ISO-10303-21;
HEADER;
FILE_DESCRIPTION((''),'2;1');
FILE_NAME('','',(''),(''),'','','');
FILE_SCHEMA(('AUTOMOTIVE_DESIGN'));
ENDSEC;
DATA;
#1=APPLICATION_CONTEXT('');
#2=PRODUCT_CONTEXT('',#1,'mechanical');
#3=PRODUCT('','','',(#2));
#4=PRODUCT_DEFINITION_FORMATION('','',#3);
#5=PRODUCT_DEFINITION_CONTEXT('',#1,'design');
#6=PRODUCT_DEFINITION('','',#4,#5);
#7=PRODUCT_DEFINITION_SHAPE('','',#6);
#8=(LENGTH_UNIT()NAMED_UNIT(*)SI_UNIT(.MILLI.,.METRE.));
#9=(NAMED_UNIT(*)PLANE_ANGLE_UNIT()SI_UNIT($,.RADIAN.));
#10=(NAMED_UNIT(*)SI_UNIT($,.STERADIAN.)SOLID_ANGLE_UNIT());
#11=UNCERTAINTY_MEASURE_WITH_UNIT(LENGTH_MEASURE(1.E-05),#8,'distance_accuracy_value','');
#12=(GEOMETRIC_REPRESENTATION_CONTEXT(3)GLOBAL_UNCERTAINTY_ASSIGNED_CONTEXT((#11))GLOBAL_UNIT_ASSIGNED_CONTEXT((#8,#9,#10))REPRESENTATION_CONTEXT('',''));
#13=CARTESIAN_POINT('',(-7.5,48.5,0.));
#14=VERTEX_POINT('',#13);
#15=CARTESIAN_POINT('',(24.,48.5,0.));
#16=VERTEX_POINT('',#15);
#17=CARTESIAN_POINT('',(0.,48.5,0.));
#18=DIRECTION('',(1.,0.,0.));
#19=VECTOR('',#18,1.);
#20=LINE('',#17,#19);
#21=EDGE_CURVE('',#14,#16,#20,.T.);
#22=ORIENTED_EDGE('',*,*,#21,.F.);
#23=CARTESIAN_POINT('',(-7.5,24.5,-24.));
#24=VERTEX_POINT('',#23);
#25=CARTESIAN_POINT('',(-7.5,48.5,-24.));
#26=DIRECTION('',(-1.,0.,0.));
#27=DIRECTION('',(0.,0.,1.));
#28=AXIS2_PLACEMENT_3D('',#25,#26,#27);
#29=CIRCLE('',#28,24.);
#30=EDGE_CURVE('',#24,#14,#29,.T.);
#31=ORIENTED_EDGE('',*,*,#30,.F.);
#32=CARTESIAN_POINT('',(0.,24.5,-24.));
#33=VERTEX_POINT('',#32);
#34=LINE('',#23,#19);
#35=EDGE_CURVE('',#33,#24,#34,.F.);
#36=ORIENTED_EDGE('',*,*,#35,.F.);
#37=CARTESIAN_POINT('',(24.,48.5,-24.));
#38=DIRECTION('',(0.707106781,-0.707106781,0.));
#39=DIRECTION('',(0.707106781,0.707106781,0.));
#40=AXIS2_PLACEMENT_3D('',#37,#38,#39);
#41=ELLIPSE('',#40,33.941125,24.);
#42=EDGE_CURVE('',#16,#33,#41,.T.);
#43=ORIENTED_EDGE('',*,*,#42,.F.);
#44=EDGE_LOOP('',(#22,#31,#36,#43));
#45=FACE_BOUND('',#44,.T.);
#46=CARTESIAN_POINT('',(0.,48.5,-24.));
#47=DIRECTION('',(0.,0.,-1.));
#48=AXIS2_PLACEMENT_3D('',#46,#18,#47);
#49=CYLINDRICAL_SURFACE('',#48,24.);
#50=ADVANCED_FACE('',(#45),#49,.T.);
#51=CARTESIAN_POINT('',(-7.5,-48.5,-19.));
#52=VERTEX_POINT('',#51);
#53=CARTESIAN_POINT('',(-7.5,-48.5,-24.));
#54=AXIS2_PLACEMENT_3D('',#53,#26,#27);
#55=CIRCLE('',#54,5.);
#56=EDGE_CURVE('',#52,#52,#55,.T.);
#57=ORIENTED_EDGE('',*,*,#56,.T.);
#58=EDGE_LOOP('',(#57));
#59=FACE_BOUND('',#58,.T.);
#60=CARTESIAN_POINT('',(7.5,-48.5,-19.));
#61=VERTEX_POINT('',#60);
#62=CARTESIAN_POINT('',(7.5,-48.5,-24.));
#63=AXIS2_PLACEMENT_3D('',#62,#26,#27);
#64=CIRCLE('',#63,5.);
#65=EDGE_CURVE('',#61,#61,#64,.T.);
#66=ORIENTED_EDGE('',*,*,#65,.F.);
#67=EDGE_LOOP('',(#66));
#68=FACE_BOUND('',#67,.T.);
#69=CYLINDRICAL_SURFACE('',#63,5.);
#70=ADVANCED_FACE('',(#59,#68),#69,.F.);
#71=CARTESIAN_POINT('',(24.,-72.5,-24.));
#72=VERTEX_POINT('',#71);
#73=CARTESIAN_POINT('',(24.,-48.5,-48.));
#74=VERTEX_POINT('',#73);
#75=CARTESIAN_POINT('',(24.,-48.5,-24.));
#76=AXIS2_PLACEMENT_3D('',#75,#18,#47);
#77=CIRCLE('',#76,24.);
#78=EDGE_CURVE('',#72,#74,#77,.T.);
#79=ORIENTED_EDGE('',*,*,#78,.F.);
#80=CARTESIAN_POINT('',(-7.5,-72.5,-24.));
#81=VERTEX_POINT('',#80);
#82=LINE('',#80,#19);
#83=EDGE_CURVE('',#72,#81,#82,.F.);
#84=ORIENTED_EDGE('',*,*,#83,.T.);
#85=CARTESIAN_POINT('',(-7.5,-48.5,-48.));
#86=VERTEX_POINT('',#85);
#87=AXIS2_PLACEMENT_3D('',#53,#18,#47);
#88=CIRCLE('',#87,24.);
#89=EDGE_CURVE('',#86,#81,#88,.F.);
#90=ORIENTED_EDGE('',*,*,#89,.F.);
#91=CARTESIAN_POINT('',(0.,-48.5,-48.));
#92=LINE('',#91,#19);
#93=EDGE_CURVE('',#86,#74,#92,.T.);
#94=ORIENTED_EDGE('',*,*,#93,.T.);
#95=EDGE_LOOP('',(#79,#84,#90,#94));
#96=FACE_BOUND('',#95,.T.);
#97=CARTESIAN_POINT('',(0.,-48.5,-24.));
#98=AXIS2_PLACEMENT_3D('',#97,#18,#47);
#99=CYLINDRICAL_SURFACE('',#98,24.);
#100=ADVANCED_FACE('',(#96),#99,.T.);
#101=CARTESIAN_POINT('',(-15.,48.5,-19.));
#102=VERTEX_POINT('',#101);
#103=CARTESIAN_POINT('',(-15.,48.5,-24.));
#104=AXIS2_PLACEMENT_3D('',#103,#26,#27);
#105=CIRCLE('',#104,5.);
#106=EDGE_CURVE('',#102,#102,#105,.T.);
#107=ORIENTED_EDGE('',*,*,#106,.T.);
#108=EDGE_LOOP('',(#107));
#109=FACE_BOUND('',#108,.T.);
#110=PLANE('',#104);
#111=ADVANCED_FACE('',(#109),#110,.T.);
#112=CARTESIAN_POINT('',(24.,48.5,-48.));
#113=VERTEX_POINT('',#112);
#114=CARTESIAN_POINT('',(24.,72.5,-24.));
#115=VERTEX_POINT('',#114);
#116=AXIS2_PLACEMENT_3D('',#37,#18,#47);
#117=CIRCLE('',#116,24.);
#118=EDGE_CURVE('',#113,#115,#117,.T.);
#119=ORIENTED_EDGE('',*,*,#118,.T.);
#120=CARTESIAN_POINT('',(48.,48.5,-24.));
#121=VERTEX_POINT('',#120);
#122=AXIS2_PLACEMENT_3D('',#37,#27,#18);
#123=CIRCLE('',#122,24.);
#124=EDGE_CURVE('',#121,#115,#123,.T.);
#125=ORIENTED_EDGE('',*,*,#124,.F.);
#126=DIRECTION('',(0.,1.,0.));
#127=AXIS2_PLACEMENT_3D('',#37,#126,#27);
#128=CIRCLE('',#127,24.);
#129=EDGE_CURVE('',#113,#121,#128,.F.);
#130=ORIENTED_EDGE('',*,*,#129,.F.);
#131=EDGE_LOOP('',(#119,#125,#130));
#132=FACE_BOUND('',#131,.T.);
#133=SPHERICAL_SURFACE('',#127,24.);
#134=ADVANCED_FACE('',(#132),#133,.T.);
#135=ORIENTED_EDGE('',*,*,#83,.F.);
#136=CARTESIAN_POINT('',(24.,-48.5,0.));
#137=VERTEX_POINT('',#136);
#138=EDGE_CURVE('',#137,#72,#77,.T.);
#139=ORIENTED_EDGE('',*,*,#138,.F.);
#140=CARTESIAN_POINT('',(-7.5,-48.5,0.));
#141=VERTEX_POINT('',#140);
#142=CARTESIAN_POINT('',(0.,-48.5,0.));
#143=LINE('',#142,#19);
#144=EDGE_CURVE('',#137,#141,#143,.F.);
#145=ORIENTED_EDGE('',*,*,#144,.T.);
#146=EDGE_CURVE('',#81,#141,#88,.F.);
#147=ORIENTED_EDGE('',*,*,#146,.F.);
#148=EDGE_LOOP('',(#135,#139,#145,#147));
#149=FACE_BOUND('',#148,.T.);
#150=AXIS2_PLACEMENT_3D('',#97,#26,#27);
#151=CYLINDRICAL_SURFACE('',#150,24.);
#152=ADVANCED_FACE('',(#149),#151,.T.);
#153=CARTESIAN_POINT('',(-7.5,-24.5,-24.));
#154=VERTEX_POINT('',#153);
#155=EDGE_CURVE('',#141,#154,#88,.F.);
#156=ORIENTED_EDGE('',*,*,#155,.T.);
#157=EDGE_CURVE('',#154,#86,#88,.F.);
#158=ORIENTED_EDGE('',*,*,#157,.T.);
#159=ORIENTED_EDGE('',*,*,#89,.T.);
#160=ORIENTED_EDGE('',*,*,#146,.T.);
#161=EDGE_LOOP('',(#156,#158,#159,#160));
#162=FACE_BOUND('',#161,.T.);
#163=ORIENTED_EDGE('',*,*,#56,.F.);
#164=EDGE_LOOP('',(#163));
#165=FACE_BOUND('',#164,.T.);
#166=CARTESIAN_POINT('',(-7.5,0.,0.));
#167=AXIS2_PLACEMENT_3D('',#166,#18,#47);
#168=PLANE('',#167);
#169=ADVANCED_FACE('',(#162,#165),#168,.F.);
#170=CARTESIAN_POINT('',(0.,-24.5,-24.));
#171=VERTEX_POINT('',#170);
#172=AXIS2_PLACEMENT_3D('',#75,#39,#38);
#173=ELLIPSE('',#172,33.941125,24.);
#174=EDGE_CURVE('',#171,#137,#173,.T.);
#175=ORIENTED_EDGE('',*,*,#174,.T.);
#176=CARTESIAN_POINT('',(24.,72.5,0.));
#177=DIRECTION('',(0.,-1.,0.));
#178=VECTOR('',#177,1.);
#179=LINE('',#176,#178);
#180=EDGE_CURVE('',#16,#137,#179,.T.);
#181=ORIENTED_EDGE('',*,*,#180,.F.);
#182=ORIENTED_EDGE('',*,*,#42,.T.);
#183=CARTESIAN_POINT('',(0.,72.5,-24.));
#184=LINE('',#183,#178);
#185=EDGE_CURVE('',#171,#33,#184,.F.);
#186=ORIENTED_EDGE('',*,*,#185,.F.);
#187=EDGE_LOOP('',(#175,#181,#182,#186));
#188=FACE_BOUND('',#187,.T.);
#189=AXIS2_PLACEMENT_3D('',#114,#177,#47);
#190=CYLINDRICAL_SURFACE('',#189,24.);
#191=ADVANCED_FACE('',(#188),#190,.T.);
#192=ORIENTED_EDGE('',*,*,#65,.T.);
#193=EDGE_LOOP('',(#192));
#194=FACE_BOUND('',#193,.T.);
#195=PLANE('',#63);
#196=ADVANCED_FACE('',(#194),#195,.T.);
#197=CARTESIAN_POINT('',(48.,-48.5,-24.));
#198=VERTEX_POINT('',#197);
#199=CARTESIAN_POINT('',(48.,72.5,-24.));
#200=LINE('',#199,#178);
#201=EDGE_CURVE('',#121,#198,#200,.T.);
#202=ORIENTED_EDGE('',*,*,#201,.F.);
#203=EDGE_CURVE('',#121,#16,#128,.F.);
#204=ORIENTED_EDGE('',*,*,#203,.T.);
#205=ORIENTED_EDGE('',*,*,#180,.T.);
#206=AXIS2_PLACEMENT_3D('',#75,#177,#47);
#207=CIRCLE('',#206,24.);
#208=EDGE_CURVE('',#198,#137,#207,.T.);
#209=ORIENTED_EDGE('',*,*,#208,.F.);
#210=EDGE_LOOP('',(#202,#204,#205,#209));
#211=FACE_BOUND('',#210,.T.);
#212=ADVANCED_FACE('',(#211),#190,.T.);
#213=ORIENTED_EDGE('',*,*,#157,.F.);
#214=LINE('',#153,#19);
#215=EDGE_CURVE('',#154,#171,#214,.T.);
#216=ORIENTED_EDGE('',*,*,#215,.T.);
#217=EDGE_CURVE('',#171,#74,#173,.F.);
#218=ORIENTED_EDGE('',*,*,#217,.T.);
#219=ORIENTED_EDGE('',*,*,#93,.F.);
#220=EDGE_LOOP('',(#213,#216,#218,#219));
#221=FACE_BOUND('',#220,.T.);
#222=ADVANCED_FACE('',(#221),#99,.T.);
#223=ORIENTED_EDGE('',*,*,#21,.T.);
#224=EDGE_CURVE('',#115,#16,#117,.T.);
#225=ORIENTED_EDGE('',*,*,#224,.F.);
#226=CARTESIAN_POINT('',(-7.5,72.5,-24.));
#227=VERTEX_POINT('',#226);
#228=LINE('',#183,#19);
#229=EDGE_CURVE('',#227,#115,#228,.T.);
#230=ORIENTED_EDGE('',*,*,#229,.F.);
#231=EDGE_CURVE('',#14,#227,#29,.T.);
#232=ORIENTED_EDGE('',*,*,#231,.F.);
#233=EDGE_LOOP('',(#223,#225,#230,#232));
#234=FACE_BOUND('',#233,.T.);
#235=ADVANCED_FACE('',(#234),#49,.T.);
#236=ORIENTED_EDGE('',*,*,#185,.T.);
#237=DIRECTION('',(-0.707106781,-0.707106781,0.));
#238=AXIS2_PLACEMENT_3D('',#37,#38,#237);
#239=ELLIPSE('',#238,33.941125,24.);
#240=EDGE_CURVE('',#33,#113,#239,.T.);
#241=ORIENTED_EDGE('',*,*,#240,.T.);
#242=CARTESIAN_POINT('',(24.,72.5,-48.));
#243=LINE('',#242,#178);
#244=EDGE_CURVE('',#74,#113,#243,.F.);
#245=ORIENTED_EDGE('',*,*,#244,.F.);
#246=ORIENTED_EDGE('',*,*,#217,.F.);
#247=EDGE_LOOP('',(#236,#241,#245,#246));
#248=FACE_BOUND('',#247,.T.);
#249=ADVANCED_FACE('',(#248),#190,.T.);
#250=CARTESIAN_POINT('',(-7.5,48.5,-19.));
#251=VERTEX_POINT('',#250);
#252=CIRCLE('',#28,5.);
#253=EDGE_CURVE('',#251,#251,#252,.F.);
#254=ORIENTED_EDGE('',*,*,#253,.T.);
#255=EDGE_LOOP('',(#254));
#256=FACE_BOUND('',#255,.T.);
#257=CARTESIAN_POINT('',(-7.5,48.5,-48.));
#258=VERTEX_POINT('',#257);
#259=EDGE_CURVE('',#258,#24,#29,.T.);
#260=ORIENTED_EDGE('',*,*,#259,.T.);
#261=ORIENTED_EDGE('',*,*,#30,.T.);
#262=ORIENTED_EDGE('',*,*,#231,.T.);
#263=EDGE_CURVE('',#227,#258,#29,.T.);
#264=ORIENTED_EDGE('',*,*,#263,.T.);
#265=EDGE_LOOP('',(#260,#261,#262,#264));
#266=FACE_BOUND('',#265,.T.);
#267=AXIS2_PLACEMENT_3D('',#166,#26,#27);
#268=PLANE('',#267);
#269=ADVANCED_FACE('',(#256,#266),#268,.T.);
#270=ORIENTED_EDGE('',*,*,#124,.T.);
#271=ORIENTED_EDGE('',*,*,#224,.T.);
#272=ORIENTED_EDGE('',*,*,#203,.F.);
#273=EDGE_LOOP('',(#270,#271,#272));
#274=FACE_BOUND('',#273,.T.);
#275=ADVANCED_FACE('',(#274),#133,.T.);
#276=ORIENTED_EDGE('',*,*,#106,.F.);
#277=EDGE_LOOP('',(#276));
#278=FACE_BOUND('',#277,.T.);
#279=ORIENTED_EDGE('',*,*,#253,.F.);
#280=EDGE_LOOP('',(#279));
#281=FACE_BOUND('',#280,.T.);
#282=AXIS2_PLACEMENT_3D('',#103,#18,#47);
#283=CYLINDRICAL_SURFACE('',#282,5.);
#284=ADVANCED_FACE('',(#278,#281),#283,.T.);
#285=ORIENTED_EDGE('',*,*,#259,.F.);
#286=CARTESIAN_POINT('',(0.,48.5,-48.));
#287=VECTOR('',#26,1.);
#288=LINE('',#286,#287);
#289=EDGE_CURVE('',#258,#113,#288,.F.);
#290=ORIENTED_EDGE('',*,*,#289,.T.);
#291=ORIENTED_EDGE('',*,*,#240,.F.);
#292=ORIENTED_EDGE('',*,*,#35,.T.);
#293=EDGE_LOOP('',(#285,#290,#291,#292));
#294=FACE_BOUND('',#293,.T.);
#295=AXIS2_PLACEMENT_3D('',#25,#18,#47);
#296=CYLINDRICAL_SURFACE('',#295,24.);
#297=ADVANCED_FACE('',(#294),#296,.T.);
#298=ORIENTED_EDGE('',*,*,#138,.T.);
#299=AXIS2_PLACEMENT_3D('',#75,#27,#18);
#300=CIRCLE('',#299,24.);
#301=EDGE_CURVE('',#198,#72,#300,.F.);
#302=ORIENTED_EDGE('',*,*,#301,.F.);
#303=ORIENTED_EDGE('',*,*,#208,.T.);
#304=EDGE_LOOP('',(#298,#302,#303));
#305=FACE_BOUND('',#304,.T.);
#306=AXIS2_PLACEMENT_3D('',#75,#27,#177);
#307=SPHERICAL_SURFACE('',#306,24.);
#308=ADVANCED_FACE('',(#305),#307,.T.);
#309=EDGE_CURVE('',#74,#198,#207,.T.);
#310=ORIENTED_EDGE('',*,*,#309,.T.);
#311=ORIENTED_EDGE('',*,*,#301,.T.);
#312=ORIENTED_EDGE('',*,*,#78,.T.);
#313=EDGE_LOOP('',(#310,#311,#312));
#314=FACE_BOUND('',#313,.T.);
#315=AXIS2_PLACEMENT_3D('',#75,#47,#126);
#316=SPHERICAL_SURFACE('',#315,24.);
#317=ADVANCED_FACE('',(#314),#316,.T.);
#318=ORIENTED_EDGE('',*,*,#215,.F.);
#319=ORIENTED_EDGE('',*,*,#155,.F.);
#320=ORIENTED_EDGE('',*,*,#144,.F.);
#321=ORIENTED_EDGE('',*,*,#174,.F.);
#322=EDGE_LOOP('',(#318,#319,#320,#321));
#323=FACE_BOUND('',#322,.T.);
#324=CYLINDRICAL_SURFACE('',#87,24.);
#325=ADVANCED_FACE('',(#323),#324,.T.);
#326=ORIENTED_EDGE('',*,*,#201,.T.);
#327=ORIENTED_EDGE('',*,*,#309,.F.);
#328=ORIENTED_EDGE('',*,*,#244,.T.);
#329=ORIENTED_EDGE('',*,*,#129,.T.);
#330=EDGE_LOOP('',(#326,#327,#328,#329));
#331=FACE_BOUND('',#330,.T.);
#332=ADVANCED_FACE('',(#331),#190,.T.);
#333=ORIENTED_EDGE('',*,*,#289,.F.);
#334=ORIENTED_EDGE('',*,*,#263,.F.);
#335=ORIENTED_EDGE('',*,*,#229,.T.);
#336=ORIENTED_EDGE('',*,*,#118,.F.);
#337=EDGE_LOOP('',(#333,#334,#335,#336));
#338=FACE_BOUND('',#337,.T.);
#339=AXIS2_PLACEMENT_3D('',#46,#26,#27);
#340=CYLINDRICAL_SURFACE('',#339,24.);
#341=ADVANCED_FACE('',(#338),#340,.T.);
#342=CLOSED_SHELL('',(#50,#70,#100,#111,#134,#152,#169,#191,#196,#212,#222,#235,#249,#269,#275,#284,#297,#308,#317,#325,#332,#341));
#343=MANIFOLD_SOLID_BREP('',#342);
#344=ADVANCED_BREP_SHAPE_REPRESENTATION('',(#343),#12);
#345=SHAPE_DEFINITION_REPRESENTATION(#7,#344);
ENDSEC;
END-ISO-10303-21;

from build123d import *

# Parameters (mm, degrees)
SKETCH1_W           = 48
SKETCH1_H           = 48
BOSS_EXTRUDE1_DEPTH = 72.5
SKETCH2_W           = 48
SKETCH2_H           = 48
BOSS_EXTRUDE2_DEPTH = 7.5
FILLET1_R           = 24
SKETCH3_R           = 5
CUT_EXTRUDE1_DEPTH  = 15
SKETCH4_R           = 5
BOSS_EXTRUDE3_DEPTH = 7.5


with BuildPart() as part:
    # Sketch1 → Boss-Extrude1 (new, symmetric)
    with BuildSketch(Plane(origin=(0, 0, 0), x_dir=(1, 0, 0), z_dir=(0, 1, 0))):
        with Locations((24, 24)):
            Rectangle(SKETCH1_W, SKETCH1_H)
    extrude(amount=BOSS_EXTRUDE1_DEPTH, both=True)

    # Sketch2 → Boss-Extrude2 (add, symmetric)
    with BuildSketch(Plane.ZY):
        with Locations((-24, 48.5)):
            Rectangle(SKETCH2_W, SKETCH2_H)
        with Locations((-24, -48.5)):
            Rectangle(SKETCH2_W, SKETCH2_H)
    extrude(amount=BOSS_EXTRUDE2_DEPTH, both=True)

    # Fillet1
    fillet1_edges = [part.edges().sort_by_distance(p)[0] for p in [
        (48, 72.5, -24),
        (0, 0, -48),
        (20.25, 72.5, -48),
        (0, 0, 0),
        (-3.75, 24.5, -48),
        (-3.75, 24.5, 0),
        (-3.75, -24.5, 0),
        (-3.75, -24.5, -48),
        (20.25, -72.5, -48),
        (48, -72.5, -24),
        (20.25, -72.5, 0),
        (48, 0, -48),
        (48, 0, 0),
        (20.25, 72.5, 0),
    ]]
    fillet(fillet1_edges, radius=FILLET1_R - 0.0001)  # a hair under: the kernel refuses the full size

    # Sketch3 → Cut-Extrude1 (cut)
    with BuildSketch(Plane.ZY.offset(7.5)):
        with Locations((-24, -48.5)):
            Circle(SKETCH3_R)
    extrude(amount=-CUT_EXTRUDE1_DEPTH, mode=Mode.SUBTRACT)

    # Sketch4 → Boss-Extrude3 (add, symmetric)
    with BuildSketch(Plane.ZY.offset(7.5)):
        with Locations((-24, 48.5)):
            Circle(SKETCH4_R)
    extrude(amount=BOSS_EXTRUDE3_DEPTH, both=True)


solid = part.part
